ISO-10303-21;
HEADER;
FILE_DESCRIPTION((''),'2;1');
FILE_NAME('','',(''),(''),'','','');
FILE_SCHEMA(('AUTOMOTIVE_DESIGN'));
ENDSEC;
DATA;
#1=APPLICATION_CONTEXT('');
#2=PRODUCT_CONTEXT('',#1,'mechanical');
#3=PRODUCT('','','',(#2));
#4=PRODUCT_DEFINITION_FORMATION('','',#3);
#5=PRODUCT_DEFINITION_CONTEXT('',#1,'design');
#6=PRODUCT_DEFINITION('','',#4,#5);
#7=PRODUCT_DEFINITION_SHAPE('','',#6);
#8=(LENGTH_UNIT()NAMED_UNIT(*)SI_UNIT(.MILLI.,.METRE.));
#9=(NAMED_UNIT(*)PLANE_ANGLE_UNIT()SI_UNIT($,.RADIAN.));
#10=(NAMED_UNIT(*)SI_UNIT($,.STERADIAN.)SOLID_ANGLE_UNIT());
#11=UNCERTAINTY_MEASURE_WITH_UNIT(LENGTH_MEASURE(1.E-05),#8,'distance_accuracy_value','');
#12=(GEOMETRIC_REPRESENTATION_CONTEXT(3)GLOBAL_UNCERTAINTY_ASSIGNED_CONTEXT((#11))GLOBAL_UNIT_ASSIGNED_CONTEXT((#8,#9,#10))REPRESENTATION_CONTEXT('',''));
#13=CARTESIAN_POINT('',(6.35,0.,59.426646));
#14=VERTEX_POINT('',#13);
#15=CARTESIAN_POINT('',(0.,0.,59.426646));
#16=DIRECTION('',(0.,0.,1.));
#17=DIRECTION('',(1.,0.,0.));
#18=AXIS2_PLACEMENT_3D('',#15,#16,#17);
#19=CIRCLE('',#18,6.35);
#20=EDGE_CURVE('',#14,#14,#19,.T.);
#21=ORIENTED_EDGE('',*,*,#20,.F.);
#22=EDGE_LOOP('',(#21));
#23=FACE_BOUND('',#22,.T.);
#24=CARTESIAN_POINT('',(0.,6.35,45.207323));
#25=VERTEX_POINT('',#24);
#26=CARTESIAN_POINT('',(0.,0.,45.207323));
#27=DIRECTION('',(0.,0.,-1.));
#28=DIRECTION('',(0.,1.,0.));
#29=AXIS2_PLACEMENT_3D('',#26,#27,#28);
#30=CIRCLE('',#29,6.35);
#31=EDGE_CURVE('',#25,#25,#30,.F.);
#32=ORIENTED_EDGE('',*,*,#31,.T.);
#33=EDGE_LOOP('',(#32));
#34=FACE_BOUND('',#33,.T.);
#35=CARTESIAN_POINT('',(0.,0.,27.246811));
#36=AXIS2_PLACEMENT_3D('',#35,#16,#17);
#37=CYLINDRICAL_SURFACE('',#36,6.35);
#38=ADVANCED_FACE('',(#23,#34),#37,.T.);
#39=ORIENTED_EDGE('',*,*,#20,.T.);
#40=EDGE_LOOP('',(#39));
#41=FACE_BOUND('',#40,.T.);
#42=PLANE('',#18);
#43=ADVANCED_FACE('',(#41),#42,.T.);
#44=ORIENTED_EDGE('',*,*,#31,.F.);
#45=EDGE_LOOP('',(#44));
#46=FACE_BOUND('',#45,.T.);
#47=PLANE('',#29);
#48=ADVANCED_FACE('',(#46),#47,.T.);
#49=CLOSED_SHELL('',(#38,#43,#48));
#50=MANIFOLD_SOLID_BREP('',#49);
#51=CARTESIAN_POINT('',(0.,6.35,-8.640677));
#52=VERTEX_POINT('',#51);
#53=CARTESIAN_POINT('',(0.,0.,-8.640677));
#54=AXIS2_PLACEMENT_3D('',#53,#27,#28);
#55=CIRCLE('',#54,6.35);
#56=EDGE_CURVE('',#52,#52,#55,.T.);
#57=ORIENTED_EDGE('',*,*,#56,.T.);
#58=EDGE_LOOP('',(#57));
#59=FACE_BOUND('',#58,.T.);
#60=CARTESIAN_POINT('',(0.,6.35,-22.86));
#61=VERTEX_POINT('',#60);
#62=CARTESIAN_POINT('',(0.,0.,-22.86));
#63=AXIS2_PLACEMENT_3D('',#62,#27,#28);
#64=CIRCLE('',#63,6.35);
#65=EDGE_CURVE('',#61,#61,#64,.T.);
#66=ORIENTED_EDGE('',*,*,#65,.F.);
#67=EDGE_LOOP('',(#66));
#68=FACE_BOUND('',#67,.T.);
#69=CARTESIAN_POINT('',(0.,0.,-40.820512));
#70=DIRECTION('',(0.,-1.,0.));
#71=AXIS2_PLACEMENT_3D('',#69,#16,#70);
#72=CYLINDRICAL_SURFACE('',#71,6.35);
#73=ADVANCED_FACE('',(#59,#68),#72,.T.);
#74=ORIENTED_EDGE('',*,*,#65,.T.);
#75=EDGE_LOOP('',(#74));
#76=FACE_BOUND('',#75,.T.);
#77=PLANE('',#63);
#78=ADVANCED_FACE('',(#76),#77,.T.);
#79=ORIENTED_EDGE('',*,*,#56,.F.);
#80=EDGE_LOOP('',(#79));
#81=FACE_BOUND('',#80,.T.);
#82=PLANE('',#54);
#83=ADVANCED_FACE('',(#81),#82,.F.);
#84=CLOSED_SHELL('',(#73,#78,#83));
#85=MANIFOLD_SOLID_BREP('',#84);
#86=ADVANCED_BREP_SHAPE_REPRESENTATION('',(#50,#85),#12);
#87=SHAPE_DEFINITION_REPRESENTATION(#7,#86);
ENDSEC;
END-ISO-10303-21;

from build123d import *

# Parameters (mm, degrees)
BOSS_EXTRUDE1_START     = -14.219322913
BOSS_EXTRUDE1_OUTLINE_R = 6.35
BOSS_EXTRUDE1_DEPTH     = 14.219322913
SKETCH3_R               = 6.35
BOSS_EXTRUDE2_DEPTH     = 14.219322913


# Read off the part's stored shape, not the designer's step: Boss-Extrude1
with BuildPart() as part:
    # Boss-Extrude1 outline → Boss-Extrude1 (new body)
    with BuildSketch(Plane.XY.offset(59.426645827).offset(BOSS_EXTRUDE1_START)):
        Circle(BOSS_EXTRUDE1_OUTLINE_R)
    extrude(amount=BOSS_EXTRUDE1_DEPTH)


with BuildPart() as body_2:
    # Sketch3 → Boss-Extrude2 (new body)
    with BuildSketch(Plane(origin=(0, 0, -8.640677087), x_dir=(-1, 0, 0), z_dir=(0, 0, -1))):
        with Locations(Location((0, 0, 0), (0, 0, 90))):
            Circle(SKETCH3_R)
    extrude(amount=BOSS_EXTRUDE2_DEPTH)


solid = Compound([part.part, body_2.part])
